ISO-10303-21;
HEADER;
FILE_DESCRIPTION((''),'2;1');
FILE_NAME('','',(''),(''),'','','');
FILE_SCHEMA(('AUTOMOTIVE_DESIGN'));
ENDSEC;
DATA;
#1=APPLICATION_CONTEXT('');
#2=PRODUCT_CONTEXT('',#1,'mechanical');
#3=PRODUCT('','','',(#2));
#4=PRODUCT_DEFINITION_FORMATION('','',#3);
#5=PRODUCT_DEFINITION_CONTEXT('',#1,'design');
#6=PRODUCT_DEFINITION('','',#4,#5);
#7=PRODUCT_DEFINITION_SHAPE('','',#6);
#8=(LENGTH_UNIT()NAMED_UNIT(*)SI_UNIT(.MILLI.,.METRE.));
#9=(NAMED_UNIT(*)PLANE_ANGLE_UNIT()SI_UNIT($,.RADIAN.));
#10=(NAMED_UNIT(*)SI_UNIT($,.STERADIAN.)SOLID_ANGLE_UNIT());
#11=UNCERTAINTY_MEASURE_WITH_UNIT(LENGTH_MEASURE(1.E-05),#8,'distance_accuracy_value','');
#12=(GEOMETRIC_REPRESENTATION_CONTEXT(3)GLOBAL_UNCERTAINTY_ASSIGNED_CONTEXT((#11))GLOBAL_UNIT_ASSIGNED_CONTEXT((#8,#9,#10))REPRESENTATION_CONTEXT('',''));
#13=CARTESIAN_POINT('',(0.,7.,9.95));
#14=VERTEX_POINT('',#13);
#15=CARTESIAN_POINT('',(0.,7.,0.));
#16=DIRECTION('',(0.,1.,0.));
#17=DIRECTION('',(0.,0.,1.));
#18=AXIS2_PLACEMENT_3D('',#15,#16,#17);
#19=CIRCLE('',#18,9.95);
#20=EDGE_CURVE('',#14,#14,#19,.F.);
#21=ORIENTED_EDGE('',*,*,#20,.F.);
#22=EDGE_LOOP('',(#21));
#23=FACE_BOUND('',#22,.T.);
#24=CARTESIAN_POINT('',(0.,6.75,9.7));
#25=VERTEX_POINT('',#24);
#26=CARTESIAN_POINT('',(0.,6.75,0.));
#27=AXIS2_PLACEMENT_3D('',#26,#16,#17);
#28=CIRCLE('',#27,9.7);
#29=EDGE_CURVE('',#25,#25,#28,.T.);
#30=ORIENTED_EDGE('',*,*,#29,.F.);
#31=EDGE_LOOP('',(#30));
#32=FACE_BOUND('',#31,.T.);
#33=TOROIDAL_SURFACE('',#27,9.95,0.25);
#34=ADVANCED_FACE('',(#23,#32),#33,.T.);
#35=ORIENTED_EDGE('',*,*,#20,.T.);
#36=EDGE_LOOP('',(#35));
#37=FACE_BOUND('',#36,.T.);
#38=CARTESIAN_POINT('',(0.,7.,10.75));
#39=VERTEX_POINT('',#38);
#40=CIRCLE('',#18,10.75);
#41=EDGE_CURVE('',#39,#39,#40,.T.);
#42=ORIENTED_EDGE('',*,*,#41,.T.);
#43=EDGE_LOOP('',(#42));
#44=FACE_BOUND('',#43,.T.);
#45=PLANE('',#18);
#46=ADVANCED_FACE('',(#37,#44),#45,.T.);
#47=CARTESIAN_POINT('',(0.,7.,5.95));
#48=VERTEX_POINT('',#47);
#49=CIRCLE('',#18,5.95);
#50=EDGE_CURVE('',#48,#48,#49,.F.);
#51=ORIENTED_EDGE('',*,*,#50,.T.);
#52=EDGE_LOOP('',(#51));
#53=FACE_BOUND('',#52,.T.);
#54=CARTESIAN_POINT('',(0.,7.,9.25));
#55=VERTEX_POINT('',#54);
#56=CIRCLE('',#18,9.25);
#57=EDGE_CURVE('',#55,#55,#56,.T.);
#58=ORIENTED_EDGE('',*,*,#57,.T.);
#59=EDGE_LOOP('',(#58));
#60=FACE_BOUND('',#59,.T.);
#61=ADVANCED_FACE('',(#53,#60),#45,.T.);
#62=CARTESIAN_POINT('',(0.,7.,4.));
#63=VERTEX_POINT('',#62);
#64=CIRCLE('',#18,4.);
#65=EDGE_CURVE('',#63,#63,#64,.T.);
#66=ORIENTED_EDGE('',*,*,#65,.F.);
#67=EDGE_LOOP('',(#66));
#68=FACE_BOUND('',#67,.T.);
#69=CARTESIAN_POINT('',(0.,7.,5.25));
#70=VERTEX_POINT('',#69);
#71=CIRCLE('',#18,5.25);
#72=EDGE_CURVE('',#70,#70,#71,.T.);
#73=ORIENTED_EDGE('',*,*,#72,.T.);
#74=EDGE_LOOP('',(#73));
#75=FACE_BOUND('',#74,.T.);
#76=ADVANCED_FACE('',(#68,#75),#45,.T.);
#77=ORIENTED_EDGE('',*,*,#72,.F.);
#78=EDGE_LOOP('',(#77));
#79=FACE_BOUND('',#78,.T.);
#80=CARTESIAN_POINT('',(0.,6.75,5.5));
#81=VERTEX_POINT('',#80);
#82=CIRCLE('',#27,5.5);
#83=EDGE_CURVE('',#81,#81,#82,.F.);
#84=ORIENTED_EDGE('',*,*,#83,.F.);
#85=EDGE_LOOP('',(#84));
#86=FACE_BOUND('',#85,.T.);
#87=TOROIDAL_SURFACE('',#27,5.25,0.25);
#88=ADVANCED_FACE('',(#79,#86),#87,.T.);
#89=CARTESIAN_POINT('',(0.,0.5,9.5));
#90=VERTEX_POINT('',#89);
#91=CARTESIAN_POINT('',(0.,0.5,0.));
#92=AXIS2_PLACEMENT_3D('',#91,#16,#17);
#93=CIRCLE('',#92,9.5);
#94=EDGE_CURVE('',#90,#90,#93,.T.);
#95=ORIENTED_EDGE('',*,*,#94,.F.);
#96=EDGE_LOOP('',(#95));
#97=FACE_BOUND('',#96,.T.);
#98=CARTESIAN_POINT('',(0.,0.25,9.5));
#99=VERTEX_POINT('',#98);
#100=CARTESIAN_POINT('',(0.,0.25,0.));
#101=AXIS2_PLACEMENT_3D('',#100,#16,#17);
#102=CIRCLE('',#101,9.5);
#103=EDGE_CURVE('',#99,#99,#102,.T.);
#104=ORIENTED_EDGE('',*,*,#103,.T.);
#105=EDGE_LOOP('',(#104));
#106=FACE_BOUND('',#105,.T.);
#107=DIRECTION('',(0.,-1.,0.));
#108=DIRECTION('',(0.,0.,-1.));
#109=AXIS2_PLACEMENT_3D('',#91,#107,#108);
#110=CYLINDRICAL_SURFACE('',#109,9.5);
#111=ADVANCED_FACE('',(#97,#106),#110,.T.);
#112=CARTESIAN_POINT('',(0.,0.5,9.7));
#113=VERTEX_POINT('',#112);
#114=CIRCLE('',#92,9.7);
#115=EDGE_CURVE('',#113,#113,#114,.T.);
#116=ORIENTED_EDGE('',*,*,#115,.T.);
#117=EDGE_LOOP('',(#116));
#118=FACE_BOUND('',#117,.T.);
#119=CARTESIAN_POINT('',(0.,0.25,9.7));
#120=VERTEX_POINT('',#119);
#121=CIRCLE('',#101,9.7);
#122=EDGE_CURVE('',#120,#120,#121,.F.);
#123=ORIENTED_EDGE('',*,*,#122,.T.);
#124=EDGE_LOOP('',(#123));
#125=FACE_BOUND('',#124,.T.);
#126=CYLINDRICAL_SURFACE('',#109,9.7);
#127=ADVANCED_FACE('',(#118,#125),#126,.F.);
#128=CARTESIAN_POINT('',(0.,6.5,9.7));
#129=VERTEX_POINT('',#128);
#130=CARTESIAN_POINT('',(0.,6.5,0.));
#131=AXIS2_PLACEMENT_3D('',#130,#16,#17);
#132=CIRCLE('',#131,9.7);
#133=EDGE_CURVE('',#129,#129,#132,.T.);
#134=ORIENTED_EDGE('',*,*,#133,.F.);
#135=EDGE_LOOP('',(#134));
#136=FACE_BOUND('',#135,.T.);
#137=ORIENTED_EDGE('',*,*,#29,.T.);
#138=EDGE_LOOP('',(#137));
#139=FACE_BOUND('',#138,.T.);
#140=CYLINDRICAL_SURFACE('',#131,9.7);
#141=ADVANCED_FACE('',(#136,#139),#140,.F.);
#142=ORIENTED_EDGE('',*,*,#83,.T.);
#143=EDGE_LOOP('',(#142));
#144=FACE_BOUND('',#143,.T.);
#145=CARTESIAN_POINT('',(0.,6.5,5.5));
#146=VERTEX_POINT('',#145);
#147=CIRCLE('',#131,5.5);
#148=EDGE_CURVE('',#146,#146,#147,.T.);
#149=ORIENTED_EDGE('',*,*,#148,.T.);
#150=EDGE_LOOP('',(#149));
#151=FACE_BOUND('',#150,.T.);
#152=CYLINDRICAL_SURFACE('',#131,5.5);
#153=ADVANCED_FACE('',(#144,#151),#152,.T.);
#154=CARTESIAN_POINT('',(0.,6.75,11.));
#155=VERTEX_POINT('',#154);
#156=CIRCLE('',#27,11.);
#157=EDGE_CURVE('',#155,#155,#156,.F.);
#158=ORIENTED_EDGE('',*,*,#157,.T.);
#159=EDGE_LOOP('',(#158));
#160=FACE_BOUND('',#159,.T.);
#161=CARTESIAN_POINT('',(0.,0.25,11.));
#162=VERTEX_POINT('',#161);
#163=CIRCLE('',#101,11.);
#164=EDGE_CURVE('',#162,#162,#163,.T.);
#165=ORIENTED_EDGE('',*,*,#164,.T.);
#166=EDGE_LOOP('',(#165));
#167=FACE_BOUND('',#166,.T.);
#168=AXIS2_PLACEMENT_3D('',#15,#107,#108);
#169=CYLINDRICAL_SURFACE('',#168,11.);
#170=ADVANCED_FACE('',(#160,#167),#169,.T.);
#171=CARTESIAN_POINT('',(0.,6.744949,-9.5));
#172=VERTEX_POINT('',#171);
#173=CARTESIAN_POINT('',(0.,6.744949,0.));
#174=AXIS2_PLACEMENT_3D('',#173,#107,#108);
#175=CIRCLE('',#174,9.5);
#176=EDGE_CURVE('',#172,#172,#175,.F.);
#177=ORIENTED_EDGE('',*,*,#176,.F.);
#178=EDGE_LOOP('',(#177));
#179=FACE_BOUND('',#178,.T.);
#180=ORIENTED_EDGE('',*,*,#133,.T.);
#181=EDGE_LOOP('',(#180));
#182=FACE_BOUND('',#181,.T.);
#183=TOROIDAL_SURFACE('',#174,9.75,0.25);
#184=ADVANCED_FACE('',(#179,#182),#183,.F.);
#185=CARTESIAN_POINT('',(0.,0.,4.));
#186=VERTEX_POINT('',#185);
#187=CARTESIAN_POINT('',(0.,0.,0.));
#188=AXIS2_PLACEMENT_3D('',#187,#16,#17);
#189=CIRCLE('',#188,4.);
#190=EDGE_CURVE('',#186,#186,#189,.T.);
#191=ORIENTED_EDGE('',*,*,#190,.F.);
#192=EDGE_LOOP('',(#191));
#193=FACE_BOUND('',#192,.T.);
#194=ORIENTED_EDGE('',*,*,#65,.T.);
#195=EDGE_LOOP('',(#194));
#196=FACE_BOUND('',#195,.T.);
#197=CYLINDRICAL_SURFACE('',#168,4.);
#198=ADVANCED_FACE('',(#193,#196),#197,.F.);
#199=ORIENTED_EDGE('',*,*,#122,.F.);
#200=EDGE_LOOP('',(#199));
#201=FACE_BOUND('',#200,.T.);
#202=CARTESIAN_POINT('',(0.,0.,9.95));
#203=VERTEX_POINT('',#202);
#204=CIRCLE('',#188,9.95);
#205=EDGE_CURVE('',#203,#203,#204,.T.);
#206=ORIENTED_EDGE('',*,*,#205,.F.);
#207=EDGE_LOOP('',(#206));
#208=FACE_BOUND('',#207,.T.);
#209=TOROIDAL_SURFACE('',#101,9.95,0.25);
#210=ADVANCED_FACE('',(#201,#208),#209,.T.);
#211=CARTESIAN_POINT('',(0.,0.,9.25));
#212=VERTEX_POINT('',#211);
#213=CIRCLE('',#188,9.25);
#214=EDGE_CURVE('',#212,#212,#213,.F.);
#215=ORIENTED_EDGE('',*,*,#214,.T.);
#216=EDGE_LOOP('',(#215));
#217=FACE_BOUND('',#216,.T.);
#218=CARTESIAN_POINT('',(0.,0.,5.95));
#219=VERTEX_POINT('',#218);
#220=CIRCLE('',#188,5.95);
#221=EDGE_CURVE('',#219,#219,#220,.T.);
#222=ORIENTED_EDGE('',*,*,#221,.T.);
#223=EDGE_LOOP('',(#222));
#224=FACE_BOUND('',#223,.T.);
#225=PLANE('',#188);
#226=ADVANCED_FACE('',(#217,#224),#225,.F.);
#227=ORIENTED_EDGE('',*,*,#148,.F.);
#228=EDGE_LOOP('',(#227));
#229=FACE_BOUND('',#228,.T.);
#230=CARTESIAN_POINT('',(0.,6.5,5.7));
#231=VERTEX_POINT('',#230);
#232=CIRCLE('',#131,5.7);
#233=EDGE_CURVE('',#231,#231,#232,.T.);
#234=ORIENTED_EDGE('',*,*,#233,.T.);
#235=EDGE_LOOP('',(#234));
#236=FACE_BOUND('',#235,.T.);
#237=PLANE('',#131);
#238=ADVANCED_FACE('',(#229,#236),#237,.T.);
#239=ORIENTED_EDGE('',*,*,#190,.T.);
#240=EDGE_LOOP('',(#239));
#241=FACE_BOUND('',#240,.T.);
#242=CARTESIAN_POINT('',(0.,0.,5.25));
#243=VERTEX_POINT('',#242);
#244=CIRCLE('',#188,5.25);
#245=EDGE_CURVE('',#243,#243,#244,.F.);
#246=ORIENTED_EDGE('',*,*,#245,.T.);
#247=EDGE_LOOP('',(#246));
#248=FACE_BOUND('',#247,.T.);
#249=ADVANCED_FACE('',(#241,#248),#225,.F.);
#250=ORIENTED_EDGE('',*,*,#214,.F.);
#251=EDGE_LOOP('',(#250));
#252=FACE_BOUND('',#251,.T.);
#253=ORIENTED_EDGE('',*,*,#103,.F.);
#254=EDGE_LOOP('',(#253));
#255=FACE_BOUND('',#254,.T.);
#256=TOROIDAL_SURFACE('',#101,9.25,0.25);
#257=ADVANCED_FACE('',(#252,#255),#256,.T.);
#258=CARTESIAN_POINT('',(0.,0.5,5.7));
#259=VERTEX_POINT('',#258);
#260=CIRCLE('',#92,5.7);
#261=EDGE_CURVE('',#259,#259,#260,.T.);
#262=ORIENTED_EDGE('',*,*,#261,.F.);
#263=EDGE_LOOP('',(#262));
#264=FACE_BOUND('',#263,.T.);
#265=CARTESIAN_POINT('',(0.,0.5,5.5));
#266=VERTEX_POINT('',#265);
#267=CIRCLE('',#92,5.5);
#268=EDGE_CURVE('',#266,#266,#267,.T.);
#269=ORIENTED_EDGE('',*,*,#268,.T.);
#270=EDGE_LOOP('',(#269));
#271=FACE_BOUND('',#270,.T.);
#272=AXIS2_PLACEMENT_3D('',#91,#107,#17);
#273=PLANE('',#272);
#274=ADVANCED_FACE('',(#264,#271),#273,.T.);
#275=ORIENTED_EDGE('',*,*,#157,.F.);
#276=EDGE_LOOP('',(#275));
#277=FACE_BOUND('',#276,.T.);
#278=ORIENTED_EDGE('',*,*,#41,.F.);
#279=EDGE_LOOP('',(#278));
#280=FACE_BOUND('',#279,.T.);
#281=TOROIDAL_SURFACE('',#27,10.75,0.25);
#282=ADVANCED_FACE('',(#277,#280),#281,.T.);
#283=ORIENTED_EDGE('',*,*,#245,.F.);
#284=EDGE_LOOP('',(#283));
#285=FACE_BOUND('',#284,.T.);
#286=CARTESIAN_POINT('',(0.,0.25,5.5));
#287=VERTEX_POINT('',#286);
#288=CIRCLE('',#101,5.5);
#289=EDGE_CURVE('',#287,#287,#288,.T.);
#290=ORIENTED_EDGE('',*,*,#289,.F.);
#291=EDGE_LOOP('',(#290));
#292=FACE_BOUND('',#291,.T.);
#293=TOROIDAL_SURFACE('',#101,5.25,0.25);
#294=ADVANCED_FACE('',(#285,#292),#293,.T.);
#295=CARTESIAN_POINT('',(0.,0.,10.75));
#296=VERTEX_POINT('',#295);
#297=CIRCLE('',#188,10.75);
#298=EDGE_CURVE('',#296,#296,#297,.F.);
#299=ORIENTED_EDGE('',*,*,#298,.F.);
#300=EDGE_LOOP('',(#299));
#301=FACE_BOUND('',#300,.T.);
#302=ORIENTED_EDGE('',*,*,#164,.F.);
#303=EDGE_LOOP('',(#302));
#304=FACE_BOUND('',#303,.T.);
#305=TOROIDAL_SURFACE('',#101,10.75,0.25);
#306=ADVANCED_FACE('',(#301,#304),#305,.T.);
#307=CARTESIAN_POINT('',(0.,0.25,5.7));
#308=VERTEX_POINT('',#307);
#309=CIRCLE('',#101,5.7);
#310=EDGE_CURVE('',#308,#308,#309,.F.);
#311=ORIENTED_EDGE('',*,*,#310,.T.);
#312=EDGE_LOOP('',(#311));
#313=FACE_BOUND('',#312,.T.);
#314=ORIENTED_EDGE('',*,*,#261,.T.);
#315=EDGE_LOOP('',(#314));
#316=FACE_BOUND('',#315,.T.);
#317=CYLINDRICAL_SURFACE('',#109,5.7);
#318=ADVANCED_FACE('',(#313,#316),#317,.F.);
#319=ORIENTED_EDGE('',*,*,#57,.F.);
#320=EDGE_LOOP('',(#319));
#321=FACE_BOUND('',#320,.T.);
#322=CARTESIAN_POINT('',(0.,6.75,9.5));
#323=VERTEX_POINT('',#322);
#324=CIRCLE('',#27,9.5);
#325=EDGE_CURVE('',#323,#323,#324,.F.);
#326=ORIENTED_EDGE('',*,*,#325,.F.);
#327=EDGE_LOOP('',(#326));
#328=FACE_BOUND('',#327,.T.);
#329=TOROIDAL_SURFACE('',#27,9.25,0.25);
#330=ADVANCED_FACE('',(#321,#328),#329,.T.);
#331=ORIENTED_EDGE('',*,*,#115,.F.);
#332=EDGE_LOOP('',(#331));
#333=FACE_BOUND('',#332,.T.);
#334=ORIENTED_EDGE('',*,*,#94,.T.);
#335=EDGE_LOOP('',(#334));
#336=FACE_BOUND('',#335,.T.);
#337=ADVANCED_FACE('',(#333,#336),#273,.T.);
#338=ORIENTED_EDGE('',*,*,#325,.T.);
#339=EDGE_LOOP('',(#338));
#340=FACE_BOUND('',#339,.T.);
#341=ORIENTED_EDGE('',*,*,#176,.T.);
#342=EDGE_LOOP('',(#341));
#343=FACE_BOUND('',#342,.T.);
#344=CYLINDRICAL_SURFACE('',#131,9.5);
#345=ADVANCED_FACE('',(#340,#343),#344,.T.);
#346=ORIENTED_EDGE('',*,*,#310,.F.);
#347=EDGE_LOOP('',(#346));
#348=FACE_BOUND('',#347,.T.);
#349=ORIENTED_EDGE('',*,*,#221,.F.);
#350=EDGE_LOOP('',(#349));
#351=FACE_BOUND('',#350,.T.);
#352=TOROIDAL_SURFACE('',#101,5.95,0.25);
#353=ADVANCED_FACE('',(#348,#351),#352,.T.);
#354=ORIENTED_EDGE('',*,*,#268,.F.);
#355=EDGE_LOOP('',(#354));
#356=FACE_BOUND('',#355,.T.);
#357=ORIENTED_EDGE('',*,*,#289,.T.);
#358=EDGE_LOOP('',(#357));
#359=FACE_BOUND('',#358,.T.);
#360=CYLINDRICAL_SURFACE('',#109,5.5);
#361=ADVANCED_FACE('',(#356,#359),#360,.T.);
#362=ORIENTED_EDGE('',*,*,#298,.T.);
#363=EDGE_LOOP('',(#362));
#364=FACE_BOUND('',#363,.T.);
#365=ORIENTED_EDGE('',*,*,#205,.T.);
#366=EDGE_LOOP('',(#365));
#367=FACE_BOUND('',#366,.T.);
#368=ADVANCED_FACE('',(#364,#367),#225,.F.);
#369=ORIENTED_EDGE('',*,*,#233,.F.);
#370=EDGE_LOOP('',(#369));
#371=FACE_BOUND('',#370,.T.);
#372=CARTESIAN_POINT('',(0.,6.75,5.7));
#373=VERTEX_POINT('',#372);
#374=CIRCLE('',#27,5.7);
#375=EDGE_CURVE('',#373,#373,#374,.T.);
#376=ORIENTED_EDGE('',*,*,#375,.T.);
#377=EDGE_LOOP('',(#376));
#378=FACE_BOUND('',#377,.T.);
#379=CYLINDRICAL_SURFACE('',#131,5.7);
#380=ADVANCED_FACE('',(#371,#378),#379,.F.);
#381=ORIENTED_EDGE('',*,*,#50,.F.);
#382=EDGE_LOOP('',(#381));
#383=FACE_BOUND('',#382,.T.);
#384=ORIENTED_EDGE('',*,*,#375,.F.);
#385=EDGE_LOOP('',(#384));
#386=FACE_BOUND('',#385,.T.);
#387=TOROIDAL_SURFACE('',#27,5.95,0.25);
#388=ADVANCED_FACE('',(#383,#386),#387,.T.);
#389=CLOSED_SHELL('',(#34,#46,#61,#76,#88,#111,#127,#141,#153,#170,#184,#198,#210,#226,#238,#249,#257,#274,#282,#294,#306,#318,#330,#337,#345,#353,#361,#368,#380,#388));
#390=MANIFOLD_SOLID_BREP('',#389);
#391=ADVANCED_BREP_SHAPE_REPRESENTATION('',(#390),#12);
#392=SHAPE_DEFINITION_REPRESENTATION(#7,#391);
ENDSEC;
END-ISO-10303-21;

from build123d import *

# Parameters (mm, degrees)
SKETCH1_R           = 11
SKETCH1_R_2         = 4
BOSS_EXTRUDE1_DEPTH = 7
SKETCH2_R           = 9.7
SKETCH2_R_2         = 9.5
SKETCH2_R_3         = 5.7
SKETCH2_R_4         = 5.5
CUT_EXTRUDE1_DEPTH  = 0.5
FILLET1_R           = 0.25
FILLET2_R           = 0.25


with BuildPart() as part:
    # Sketch1 → Boss-Extrude1 (new body)
    with BuildSketch(Plane(origin=(0, 0, 0), x_dir=(1, 0, 0), z_dir=(0, 1, 0))):
        with Locations(Location((0, 0, 0), (0, 0, 270))):
            Circle(SKETCH1_R)
        with Locations(Location((0, 0, 0), (0, 0, 270))):
            Circle(SKETCH1_R_2, mode=Mode.SUBTRACT)
    extrude(amount=BOSS_EXTRUDE1_DEPTH)

    # Sketch2 → Cut-Extrude1 (cut)
    # profile 1 of 2: a face of its own
    with BuildSketch(Plane(origin=(0, 7, 0), x_dir=(1, 0, 0), z_dir=(0, 1, 0))):
        with Locations(Location((0, 0, 0), (0, 0, 270))):
            Circle(SKETCH2_R)
        with Locations(Location((0, 0, 0), (0, 0, 270))):
            Circle(SKETCH2_R_2, mode=Mode.SUBTRACT)
    # profile 2 of 2: a face of its own
    with BuildSketch(Plane(origin=(0, 7, 0), x_dir=(1, 0, 0), z_dir=(0, 1, 0))):
        with Locations(Location((0, 0, 0), (0, 0, 270))):
            Circle(SKETCH2_R_3)
        with Locations(Location((0, 0, 0), (0, 0, 270))):
            Circle(SKETCH2_R_4, mode=Mode.SUBTRACT)
    cut_extrude1 = extrude(amount=-CUT_EXTRUDE1_DEPTH, mode=Mode.SUBTRACT)

    # Mirror1: Cut-Extrude1 across plane
    add(cut_extrude1.mirror(Plane.ZX.offset(3.5)), mode=Mode.SUBTRACT)

    # Fillet1
    # the kernel refuses this fillet: 0.25 mm, written as the material it adds along each edge
    with BuildSketch(Plane(origin=(0, 6.5, 0), x_dir=(0, 0, 1), z_dir=(-1, 0, 0))) as fillet1_piece_1:
        with BuildLine():
            CenterArc((9.75, 0.244948974), FILLET1_R, 180, 78.463040967)
            Line((9.5, 0.244948974), (9.5, 0))
            Line((9.5, 0), (9.7, 0))
        make_face()
    revolve(axis=Axis((0, 6.5, 0), (0, 1, 0)))
    # the kernel refuses this fillet: 0.25 mm, written as the material it takes off along each edge
    with BuildSketch(Plane(origin=(0, 7, 0), x_dir=(0, 0, 1), z_dir=(-1, 0, 0))) as fillet1_2_piece_1:
        with BuildLine():
            CenterArc((9.5 - FILLET1_R, -FILLET1_R), FILLET1_R, 0, 90)
            Line((9.5 - FILLET1_R, 0), (9.5, 0))
            Line((9.5, 0), (9.5, -FILLET1_R))
        make_face()
    revolve(axis=Axis((0, 7, 0), (0, 1, 0)), mode=Mode.SUBTRACT)
    with BuildSketch(Plane(origin=(0, 7, 0), x_dir=(0, 0, 1), z_dir=(-1, 0, 0))) as fillet1_2_piece_2:
        with BuildLine():
            CenterArc((9.7 + FILLET1_R, -FILLET1_R), FILLET1_R, 90, 90)
            Line((9.7, -FILLET1_R), (9.7, 0))
            Line((9.7, 0), (9.7 + FILLET1_R, 0))
        make_face()
    revolve(axis=Axis((0, 7, 0), (0, 1, 0)), mode=Mode.SUBTRACT)
    with BuildSketch(Plane(origin=(0, 7, 0), x_dir=(0, 0, 1), z_dir=(-1, 0, 0))) as fillet1_2_piece_3:
        with BuildLine():
            CenterArc((5.5 - FILLET1_R, -FILLET1_R), FILLET1_R, 0, 90)
            Line((5.5 - FILLET1_R, 0), (5.5, 0))
            Line((5.5, 0), (5.5, -FILLET1_R))
        make_face()
    revolve(axis=Axis((0, 7, 0), (0, 1, 0)), mode=Mode.SUBTRACT)
    with BuildSketch(Plane(origin=(0, 7, 0), x_dir=(0, 0, 1), z_dir=(-1, 0, 0))) as fillet1_2_piece_4:
        with BuildLine():
            CenterArc((5.7 + FILLET1_R, -FILLET1_R), FILLET1_R, 90, 90)
            Line((5.7, -FILLET1_R), (5.7, 0))
            Line((5.7, 0), (5.7 + FILLET1_R, 0))
        make_face()
    revolve(axis=Axis((0, 7, 0), (0, 1, 0)), mode=Mode.SUBTRACT)
    with BuildSketch(Plane(origin=(0, 0, 0), x_dir=(0, 0, 1), z_dir=(-1, 0, 0))) as fillet1_2_piece_5:
        with BuildLine():
            CenterArc((9.7 + FILLET1_R, FILLET1_R), FILLET1_R, 180, 90)
            Line((9.7, FILLET1_R), (9.7, 0))
            Line((9.7, 0), (9.7 + FILLET1_R, 0))
        make_face()
    revolve(axis=Axis((0, 0, 0), (0, 1, 0)), mode=Mode.SUBTRACT)
    with BuildSketch(Plane(origin=(0, 0, 0), x_dir=(0, 0, 1), z_dir=(-1, 0, 0))) as fillet1_2_piece_6:
        with BuildLine():
            CenterArc((9.5 - FILLET1_R, FILLET1_R), FILLET1_R, 270, 90)
            Line((9.5 - FILLET1_R, 0), (9.5, 0))
            Line((9.5, 0), (9.5, FILLET1_R))
        make_face()
    revolve(axis=Axis((0, 0, 0), (0, 1, 0)), mode=Mode.SUBTRACT)
    with BuildSketch(Plane(origin=(0, 0, 0), x_dir=(0, 0, 1), z_dir=(-1, 0, 0))) as fillet1_2_piece_7:
        with BuildLine():
            CenterArc((5.7 + FILLET1_R, FILLET1_R), FILLET1_R, 180, 90)
            Line((5.7, FILLET1_R), (5.7, 0))
            Line((5.7, 0), (5.7 + FILLET1_R, 0))
        make_face()
    revolve(axis=Axis((0, 0, 0), (0, 1, 0)), mode=Mode.SUBTRACT)
    with BuildSketch(Plane(origin=(0, 0, 0), x_dir=(0, 0, 1), z_dir=(-1, 0, 0))) as fillet1_2_piece_8:
        with BuildLine():
            CenterArc((5.5 - FILLET1_R, FILLET1_R), FILLET1_R, 270, 90)
            Line((5.5 - FILLET1_R, 0), (5.5, 0))
            Line((5.5, 0), (5.5, FILLET1_R))
        make_face()
    revolve(axis=Axis((0, 0, 0), (0, 1, 0)), mode=Mode.SUBTRACT)

    # Fillet2
    fillet2_edges = [part.edges().sort_by_distance(p)[0] for p in [
        (0, 0, -11),
        (0, 7, -11),
    ]]
    fillet(fillet2_edges, radius=FILLET2_R)


solid = part.part
